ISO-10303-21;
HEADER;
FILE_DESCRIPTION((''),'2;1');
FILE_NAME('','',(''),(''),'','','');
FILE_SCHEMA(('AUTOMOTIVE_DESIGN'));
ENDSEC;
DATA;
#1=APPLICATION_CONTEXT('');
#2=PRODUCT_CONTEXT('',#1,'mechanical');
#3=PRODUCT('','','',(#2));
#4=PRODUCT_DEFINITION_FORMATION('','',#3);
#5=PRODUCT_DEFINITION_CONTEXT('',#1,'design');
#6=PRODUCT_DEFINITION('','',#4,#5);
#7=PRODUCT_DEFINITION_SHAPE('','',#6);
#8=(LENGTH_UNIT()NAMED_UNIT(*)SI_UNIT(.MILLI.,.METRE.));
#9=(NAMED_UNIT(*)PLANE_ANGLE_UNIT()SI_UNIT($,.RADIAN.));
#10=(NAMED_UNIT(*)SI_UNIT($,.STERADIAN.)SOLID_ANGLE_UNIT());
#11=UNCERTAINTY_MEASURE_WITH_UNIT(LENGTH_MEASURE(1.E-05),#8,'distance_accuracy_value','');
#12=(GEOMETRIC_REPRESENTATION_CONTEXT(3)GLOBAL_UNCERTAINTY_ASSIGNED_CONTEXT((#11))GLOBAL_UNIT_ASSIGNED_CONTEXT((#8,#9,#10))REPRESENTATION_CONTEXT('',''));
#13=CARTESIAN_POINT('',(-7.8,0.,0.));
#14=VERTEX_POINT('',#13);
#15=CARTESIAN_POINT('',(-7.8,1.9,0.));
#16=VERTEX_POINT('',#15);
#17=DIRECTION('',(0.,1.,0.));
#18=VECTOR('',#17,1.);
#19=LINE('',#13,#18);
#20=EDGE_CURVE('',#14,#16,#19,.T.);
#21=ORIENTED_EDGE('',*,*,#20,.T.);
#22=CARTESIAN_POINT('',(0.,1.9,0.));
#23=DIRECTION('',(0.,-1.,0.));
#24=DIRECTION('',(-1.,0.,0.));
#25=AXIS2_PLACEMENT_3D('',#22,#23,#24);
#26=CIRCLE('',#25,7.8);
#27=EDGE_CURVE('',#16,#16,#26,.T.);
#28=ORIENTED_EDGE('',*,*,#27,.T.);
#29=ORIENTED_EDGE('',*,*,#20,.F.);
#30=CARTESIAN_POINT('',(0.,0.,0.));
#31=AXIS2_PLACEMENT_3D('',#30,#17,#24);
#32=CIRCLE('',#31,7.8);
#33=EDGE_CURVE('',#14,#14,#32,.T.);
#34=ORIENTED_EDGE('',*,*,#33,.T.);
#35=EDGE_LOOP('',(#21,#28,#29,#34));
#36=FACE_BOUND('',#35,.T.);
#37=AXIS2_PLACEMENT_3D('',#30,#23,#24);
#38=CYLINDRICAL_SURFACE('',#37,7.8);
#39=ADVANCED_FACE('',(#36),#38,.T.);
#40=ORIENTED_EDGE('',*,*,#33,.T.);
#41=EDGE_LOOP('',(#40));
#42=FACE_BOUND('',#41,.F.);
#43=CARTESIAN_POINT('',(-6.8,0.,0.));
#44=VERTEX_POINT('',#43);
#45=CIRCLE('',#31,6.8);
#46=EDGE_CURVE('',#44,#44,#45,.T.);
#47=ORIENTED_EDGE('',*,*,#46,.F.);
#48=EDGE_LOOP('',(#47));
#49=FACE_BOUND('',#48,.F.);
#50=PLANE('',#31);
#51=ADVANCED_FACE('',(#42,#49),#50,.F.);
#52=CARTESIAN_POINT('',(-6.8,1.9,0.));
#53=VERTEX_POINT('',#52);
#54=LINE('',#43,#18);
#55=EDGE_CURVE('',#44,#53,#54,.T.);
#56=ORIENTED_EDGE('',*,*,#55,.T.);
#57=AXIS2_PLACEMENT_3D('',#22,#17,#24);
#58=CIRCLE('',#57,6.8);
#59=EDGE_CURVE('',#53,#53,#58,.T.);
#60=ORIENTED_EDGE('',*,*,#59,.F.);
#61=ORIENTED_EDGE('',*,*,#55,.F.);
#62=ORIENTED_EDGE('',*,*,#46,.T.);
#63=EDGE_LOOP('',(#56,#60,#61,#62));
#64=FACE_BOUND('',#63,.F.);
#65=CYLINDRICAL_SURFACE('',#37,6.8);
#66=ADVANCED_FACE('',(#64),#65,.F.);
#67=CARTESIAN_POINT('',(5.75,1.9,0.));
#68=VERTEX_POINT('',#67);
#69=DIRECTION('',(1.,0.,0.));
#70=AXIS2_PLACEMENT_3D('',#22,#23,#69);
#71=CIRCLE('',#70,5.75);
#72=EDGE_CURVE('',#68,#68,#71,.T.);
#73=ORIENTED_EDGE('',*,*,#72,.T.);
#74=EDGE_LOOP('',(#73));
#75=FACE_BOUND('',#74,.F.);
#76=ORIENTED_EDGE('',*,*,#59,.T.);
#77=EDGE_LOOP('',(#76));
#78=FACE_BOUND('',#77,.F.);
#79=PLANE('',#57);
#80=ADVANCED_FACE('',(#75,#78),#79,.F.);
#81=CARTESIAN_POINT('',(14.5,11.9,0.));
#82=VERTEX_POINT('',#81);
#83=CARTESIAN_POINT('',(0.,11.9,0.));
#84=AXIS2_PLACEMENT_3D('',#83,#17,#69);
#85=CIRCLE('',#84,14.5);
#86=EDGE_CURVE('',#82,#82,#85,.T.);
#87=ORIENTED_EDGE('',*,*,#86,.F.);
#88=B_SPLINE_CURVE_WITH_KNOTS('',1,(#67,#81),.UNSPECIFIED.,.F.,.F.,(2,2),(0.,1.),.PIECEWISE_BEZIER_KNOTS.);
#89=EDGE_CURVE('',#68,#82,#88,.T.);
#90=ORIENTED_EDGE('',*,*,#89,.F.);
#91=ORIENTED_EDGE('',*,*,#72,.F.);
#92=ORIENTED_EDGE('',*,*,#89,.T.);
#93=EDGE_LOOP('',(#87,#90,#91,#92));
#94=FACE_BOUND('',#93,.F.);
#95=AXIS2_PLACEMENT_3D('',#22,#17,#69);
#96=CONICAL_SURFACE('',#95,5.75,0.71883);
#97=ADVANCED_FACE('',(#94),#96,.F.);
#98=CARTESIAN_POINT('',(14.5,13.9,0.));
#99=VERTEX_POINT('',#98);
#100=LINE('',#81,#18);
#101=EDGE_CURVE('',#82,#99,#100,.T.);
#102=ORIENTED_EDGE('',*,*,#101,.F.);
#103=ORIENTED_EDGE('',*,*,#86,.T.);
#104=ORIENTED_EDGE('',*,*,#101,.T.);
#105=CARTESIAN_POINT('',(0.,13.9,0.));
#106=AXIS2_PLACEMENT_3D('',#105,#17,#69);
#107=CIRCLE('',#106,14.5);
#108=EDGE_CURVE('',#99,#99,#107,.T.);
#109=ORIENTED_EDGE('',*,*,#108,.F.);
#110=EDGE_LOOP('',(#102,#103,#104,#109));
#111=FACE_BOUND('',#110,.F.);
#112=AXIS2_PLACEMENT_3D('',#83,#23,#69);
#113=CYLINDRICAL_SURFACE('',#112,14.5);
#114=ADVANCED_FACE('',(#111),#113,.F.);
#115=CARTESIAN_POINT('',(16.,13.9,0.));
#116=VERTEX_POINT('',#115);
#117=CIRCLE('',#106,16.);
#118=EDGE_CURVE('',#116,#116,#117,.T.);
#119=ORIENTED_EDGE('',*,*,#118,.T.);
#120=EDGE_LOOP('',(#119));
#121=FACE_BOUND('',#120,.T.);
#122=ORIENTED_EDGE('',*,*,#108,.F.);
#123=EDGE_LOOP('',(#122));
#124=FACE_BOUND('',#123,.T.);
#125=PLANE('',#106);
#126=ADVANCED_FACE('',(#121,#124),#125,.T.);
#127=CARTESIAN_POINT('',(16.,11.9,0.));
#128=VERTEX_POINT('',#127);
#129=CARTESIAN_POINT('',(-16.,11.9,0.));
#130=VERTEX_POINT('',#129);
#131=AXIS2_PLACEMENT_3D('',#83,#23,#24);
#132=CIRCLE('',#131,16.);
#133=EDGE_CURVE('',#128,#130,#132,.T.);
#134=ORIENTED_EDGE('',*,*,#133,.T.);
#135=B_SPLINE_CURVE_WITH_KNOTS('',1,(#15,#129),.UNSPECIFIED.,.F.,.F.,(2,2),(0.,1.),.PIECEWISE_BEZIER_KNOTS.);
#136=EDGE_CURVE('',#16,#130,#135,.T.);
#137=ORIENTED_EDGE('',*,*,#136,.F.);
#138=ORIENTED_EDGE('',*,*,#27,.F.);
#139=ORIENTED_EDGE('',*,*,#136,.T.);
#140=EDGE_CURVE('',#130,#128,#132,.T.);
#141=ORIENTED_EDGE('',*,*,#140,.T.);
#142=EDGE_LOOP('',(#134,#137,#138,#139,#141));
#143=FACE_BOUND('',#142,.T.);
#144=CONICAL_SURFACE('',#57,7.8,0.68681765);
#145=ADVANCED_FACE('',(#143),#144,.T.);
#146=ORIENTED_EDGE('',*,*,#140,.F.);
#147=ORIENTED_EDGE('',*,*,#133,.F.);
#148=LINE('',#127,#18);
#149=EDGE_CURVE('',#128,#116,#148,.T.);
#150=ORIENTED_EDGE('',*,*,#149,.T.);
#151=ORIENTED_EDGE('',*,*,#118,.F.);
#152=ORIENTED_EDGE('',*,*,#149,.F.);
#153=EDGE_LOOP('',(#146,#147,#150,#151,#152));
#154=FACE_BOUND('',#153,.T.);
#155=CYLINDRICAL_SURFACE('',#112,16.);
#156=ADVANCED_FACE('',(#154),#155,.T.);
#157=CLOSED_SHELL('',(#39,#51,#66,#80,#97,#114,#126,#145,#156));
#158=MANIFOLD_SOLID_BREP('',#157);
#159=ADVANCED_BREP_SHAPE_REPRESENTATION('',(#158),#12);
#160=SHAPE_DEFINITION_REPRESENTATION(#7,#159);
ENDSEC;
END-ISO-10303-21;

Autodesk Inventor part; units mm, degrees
ref_plane "YZ Plane" through (0, 0, 0) normal (1, 0, 0) x (0, 1, 0)
ref_plane "XZ Plane" through (0, 0, 0) normal (0, 1, 0) x (-1, 0, 0)
sketch "Sketch1" plane through (0, 0, 0) normal (0, 1, 0) x (-1, 0, 0)
  circle A0 centre (0, 0) radius 6.8
  circle A1 centre (0, 0) radius 7.8
  dimension "d0" = 13.6
  dimension "d1" = 15.6
extrude "Extrusion1" add sketch "Sketch1" along normal blind 1.9
sketch "Sketch2" plane through (0, 1.9, 0) normal (0, 1, 0) x (1, 0, 0)
  circle A0 centre (0, 0) radius 7.8
  dimension "d20" = 15.6
ref_plane "Work Plane1" through (0, 11.9, 0) normal (0, 1, 0) x (1, 0, 0)
sketch "Sketch3" plane through (0, 11.9, 0) normal (0, 1, 0) x (1, 0, 0)
  circle A0 centre (0, 0) radius 16
  dimension "d6" = 32
loft "Loft1" add profiles "Sketch3" section 1 edges at (7.8, 1.9, 0)
sketch "Sketch4" plane through (0, 1.9, 0) normal (0, -1, 0) x (1, 0, 0)
  circle A0 centre (0, 0) radius 5.75
  dimension "d12" = 11.5
sketch "Sketch5" plane through (0, 11.9, 0) normal (0, 1, 0) x (1, 0, 0)
  circle A0 centre (0, 0) radius 14.5
  dimension "d13" = 29
loft "Loft2" cut profiles "Sketch4", "Sketch5"
sketch "Sketch6" plane through (0, 11.9, 0) normal (0, 1, 0) x (1, 0, 0)
  circle A0 centre (0, 0) radius 14.5
  circle A1 centre (0, 0) radius 16
  dimension "d21" = 32
  dimension "d22" = 29
extrude "Extrusion2" add sketch "Sketch6" along normal blind 2
properties part number "Widefield_LightShield_Cone"
